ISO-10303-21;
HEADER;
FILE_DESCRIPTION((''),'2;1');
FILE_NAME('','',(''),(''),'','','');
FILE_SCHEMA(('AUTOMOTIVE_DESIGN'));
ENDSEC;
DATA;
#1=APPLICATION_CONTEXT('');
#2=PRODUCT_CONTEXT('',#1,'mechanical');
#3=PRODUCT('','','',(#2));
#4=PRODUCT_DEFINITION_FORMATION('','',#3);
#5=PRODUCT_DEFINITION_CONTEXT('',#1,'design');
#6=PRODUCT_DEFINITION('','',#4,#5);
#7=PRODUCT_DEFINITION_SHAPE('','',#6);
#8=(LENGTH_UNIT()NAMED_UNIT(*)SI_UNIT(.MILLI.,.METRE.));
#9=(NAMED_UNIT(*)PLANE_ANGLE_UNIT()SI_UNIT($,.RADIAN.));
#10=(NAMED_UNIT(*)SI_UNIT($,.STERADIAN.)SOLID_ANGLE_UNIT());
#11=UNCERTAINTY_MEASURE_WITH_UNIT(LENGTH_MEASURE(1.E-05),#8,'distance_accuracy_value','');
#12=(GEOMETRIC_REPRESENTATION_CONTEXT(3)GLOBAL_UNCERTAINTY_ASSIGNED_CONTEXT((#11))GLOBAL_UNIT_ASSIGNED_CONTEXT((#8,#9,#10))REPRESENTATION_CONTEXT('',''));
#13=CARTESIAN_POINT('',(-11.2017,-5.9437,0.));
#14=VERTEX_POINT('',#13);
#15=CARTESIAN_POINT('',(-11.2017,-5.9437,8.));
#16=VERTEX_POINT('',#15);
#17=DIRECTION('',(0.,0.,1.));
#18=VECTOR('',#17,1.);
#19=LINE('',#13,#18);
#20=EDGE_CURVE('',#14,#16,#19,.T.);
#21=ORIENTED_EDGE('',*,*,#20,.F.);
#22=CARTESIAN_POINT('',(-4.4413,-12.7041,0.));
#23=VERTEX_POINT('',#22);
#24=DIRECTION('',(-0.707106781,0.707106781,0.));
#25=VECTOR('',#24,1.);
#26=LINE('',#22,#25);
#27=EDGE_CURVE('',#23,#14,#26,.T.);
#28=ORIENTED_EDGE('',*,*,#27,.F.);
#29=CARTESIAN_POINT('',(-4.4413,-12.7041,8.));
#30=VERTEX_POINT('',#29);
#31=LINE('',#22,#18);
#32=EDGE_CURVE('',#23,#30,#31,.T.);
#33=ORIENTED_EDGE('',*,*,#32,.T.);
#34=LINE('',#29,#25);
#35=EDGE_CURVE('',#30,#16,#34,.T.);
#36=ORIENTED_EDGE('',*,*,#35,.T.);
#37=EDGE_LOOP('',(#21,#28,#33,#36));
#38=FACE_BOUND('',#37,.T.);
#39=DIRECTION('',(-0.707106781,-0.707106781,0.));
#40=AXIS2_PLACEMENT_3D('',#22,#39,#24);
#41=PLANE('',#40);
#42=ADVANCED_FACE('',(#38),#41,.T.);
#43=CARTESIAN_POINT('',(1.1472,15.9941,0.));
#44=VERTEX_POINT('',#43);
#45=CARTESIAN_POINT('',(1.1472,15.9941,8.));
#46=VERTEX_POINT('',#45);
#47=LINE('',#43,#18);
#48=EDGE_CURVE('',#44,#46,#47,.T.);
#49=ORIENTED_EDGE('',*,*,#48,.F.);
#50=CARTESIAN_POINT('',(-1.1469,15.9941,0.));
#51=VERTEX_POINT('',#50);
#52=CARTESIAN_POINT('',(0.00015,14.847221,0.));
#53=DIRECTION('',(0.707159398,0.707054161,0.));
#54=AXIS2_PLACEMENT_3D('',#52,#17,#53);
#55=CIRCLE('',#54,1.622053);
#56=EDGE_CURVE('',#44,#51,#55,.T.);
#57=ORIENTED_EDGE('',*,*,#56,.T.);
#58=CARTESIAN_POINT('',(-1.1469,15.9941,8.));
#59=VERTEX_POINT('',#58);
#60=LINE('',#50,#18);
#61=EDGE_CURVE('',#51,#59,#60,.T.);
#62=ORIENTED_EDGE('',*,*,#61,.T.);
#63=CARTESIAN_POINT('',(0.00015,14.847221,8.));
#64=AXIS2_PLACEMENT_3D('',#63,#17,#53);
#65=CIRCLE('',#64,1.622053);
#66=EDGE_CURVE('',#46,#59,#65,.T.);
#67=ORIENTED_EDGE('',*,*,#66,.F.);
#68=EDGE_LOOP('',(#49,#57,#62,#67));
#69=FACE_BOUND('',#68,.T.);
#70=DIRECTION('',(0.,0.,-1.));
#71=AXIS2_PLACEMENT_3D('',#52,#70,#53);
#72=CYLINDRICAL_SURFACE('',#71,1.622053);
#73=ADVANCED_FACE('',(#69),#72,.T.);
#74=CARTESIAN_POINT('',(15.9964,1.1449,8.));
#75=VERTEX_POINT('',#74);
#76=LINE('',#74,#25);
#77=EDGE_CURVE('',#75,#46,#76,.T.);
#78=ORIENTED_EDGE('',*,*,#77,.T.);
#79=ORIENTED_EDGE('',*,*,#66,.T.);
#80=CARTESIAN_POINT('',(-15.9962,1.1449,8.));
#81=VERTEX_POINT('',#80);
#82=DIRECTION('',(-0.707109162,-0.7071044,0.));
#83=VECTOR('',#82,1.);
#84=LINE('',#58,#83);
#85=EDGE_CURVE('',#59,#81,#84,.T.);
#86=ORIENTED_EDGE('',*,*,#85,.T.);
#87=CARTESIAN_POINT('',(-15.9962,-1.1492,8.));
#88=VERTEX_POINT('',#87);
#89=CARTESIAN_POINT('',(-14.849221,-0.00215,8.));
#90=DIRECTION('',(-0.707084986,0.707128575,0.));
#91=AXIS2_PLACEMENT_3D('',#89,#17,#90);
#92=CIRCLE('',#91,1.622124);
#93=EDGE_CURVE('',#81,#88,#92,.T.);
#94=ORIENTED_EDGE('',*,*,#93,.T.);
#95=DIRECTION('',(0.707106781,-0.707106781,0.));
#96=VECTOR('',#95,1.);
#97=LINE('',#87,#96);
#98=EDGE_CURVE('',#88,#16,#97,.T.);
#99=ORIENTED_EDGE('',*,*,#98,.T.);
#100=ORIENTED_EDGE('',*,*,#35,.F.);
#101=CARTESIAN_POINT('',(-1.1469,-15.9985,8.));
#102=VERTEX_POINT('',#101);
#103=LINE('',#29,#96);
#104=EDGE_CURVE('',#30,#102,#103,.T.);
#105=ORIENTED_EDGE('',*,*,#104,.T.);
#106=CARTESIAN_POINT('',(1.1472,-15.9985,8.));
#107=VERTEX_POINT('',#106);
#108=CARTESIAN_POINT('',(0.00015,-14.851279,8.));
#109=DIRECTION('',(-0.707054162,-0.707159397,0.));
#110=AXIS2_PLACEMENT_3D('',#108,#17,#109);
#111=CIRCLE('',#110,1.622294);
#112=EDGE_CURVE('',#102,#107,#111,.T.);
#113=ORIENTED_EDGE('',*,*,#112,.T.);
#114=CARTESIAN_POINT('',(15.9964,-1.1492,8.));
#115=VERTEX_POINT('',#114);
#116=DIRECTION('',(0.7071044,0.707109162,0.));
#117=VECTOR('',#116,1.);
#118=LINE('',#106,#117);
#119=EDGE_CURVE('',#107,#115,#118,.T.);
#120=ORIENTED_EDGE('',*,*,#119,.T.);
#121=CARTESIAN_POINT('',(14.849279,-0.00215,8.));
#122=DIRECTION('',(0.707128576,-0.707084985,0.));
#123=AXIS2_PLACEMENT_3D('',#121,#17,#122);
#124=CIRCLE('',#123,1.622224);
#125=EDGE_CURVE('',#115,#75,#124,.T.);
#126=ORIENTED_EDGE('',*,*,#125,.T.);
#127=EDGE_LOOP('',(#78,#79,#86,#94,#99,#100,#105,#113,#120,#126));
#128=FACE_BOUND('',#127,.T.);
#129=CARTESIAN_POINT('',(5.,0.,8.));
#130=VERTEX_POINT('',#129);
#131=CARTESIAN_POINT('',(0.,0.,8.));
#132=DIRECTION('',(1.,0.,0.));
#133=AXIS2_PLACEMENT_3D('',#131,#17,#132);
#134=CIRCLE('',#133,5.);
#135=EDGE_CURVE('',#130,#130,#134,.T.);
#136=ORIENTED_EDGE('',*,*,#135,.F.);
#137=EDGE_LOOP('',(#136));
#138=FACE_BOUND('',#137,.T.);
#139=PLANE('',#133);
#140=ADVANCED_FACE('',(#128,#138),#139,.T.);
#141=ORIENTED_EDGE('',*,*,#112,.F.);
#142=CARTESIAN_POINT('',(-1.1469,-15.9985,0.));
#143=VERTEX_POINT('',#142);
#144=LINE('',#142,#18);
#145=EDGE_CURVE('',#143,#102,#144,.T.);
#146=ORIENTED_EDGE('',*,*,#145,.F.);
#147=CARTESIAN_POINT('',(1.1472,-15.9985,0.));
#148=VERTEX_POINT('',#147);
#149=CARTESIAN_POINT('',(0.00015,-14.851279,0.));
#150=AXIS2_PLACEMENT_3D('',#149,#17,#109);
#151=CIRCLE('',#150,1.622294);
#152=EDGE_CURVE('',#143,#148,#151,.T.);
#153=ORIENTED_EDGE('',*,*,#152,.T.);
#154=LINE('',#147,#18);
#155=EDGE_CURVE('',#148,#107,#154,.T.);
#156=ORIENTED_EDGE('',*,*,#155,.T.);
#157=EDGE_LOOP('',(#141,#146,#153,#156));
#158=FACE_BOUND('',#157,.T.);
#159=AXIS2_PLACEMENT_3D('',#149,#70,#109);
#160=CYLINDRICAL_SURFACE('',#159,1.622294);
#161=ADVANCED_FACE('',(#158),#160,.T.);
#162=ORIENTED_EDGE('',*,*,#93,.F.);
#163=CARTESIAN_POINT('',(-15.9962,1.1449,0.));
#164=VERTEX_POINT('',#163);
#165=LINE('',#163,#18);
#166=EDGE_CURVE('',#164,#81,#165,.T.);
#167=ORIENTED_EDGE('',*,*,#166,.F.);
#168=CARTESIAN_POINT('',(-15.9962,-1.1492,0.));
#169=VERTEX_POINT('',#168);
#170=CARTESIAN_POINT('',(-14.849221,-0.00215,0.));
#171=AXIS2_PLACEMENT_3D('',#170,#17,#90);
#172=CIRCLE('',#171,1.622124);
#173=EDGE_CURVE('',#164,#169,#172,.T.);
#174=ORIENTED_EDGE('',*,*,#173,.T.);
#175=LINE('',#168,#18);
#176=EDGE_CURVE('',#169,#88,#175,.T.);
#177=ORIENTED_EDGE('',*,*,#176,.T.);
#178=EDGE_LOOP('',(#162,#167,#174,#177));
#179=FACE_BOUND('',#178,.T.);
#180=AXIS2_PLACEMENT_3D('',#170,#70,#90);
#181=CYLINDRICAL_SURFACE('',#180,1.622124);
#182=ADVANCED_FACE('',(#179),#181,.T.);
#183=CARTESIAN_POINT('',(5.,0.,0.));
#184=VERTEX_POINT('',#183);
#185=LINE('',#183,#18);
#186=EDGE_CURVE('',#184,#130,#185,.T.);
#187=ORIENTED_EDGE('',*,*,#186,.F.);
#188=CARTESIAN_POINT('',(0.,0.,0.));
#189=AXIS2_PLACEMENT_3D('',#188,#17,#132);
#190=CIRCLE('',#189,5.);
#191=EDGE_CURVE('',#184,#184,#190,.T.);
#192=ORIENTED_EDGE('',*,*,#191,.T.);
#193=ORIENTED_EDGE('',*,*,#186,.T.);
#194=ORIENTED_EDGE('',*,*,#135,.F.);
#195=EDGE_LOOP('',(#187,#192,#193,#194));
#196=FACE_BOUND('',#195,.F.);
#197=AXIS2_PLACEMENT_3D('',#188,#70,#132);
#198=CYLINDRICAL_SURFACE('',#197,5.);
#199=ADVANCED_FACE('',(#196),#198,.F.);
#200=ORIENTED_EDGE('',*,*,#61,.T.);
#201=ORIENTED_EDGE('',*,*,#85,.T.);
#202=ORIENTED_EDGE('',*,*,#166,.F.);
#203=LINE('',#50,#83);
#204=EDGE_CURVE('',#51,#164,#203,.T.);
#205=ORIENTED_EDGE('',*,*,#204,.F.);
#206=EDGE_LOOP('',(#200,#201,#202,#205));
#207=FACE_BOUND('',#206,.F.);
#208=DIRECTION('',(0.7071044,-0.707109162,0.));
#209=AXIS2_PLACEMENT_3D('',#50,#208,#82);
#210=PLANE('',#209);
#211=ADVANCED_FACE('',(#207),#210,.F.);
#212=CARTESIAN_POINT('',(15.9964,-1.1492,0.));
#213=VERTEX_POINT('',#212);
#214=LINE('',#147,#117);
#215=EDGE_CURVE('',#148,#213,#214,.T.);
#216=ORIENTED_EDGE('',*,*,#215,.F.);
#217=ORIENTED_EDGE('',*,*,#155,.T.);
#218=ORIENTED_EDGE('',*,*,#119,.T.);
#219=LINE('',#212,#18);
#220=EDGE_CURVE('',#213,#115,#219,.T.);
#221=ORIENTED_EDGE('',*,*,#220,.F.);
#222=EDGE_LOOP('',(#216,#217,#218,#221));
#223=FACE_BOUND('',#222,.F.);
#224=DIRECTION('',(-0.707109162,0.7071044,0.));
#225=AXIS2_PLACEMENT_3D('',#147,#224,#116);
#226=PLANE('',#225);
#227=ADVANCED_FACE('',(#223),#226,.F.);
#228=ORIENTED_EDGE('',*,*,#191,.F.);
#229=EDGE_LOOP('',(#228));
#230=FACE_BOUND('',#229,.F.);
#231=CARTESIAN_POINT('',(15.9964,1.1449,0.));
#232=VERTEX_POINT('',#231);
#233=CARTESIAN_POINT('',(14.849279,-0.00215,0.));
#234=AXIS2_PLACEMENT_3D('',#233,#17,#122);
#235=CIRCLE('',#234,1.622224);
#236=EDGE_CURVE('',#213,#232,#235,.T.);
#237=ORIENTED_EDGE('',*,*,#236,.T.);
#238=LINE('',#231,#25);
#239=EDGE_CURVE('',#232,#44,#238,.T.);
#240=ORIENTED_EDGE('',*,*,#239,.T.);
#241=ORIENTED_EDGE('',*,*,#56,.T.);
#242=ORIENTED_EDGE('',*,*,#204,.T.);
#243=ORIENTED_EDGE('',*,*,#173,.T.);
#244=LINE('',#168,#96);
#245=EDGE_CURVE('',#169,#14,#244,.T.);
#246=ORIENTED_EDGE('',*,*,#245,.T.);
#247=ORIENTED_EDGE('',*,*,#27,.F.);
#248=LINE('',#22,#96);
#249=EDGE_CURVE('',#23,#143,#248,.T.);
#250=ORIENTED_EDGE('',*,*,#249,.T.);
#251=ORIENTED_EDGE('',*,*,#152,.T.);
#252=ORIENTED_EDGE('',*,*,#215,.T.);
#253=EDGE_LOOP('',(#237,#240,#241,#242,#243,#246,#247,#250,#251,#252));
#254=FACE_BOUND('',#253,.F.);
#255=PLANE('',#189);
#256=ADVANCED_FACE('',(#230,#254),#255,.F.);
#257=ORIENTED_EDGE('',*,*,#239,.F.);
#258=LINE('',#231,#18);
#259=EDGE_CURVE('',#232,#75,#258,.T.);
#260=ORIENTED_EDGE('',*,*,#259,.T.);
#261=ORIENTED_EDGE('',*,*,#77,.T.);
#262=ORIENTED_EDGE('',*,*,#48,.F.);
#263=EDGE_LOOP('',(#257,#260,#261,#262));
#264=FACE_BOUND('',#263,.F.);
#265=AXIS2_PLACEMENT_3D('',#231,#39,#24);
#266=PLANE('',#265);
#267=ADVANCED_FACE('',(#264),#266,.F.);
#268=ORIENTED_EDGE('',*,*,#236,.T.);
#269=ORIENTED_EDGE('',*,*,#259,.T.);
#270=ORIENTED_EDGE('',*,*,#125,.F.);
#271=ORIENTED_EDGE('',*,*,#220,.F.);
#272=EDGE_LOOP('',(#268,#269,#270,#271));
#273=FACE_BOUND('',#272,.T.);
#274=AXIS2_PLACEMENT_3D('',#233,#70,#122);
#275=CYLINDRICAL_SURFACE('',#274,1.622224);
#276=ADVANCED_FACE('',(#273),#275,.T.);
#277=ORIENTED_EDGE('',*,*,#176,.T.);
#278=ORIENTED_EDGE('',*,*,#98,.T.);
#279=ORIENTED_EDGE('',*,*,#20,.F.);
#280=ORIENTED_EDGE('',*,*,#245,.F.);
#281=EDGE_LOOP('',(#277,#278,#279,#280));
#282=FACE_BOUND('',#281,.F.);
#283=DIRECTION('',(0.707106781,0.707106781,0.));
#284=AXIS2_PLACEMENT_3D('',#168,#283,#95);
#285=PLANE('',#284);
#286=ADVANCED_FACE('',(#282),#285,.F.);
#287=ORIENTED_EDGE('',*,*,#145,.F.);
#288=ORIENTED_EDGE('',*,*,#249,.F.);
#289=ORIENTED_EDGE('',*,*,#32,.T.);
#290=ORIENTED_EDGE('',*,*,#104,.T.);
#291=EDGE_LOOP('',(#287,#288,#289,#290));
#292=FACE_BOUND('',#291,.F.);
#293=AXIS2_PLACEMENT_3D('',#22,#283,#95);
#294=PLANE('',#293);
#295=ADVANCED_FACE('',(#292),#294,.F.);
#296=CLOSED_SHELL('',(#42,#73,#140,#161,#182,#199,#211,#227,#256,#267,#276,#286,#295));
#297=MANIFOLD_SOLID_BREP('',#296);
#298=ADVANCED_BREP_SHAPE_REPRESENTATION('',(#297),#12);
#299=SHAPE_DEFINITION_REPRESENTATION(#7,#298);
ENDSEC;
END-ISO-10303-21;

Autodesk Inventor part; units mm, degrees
ref_plane "YZ Plane" through (0, 0, 0) normal (1, 0, 0) x (0, 1, 0)
ref_plane "XZ Plane" through (0, 0, 0) normal (0, 1, 0) x (-1, 0, 0)
ref_plane "XY Plane" through (0, 0, 0) normal (0, 0, 1) x (1, 0, 0)
ref_plane "Arbeitsebene1" through (0, 0, 0) normal (0, 0, 1) x (1, 0, 0)
sketch "Skizze1" plane through (0, 0, 0) normal (0, 0, 1) x (1, 0, 0)
  circle A0 centre (-5.0971, -17.293) radius 1.4
  circle A1 centre (-17.4192, -5.2278) radius 1.4
  arc A2 (5.6957, 26.2674) -> (7.9686, 25.6694) centre (6.0612, 23.038) ccw
  arc A3 (5.6957, 26.2674) -> (-18.8161, -19.193) centre (0, 0) ccw
  arc A4 (-18.1702, -19.8055) -> (-18.8161, -19.193) centre (-16.2778, -17.1634) ccw
  arc A5 (-18.1702, -19.8055) -> (25.9554, 6.9811) centre (0, 0) ccw
  arc A6 (25.2463, 9.2218) -> (25.9554, 6.9811) centre (22.7119, 7.1872) ccw
  arc A7 (25.2463, 9.2218) -> (7.9686, 25.6694) centre (0, 0) ccw
  spline S0 degree 3 poles (-11.5553, -6.2972) (-11.3711, -6.4814) (-11.2247, -6.6998) (-11.0238, -7.1803) (-10.9713, -7.4379) (-10.9679, -7.9586) (-11.0171, -8.2168) (-11.2083, -8.6915) (-11.3454, -8.905) (-11.5184, -9.0874) knots 0 0 0 0 0.252225 0.252225 0.504373 0.504373 0.756494 0.756494 1 1 1 1
  line L0 (-11.5553, -6.2972) -> (-16.3497, -1.5028)
  arc A8 (-16.3497, 1.4985) -> (-16.3497, -1.5028) centre (-14.8491, -0.0022) ccw
  line L1 (-16.3497, 1.4985) -> (-1.5005, 16.3477)
  arc A9 (1.5007, 16.3477) -> (-1.5005, 16.3477) centre (0.0001, 14.8471) ccw
  line L2 (1.5007, 16.3477) -> (16.35, 1.4985)
  arc A10 (16.35, -1.5028) -> (16.35, 1.4985) centre (14.8494, -0.0022) ccw
  line L3 (16.35, -1.5028) -> (1.5007, -16.352)
  arc A11 (-1.5005, -16.352) -> (1.5007, -16.352) centre (0.0001, -14.8514) ccw
  line L4 (-1.5005, -16.352) -> (-4.7949, -13.0576)
  spline S1 degree 3 poles (-7.585, -13.0208) (-7.3961, -12.8415) (-7.1739, -12.7009) (-6.6882, -12.5128) (-6.4293, -12.4671) (-5.9087, -12.4775) (-5.6519, -12.5335) (-5.1824, -12.7372) (-4.9727, -12.8798) (-4.7949, -13.0576) knots 0 0 0 0 0.252231 0.252231 0.504388 0.504388 0.756517 0.756517 1 1 1 1
  arc A12 (-11.5184, -9.0874) -> (-7.585, -13.0208) centre (-9.4998, -11.0022) ccw
  line L5 (-4.7949, -13.0576) -> (-11.5553, -6.2972)
  line L6 (-15.9962, -1.1492) -> (-11.2017, -5.9437)
  arc A13 (-11.1557, -9.4315) -> (-7.9291, -12.658) centre (-9.4998, -11.0022) ccw
  line L7 (-4.4413, -12.7041) -> (-1.1469, -15.9985)
  arc A14 (-1.1469, -15.9985) -> (1.1472, -15.9985) centre (0.0001, -14.8514) ccw
  line L8 (1.1472, -15.9985) -> (15.9964, -1.1492)
  arc A15 (15.9964, -1.1492) -> (15.9964, 1.1449) centre (14.8494, -0.0022) ccw
  line L9 (15.9964, 1.1449) -> (1.1472, 15.9941)
  arc A16 (1.1472, 15.9941) -> (-1.1469, 15.9941) centre (0.0001, 14.8471) ccw
  line L10 (-1.1469, 15.9941) -> (-15.9962, 1.1449)
  arc A17 (-15.9962, 1.1449) -> (-15.9962, -1.1492) centre (-14.8491, -0.0022) ccw
  line L11 (-4.4414, -12.704) -> (-11.2017, -5.9437)
  circle A18 centre (0, 0) radius 5
  spline S2 degree 5 poles (-11.2017, -5.9437) (-10.656, -6.4897) (-10.3193, -7.2462) (-10.3079, -8.1062) (-10.6246, -8.8713) (-11.1557, -9.4315) knots 0 0 0 0 0 0 1 1 1 1 1 1
  spline S3 degree 5 poles (-7.9291, -12.658) (-7.3689, -12.1269) (-6.6038, -11.8103) (-5.7438, -11.8216) (-4.9873, -12.1584) (-4.4413, -12.7041) knots 0 0 0 0 0 0 1 1 1 1 1 1
  point P0 (0, 0)
  dimension "d0" = 0.5
  dimension "d1" = 10
extrude "Extrusion1" add sketch "Skizze1" along normal blind 8 contours L6 A17 L10 A16 L9 A15 L8 A14 L7 L11
properties part number "IM_Matchboxscope_lightdiffusor"
